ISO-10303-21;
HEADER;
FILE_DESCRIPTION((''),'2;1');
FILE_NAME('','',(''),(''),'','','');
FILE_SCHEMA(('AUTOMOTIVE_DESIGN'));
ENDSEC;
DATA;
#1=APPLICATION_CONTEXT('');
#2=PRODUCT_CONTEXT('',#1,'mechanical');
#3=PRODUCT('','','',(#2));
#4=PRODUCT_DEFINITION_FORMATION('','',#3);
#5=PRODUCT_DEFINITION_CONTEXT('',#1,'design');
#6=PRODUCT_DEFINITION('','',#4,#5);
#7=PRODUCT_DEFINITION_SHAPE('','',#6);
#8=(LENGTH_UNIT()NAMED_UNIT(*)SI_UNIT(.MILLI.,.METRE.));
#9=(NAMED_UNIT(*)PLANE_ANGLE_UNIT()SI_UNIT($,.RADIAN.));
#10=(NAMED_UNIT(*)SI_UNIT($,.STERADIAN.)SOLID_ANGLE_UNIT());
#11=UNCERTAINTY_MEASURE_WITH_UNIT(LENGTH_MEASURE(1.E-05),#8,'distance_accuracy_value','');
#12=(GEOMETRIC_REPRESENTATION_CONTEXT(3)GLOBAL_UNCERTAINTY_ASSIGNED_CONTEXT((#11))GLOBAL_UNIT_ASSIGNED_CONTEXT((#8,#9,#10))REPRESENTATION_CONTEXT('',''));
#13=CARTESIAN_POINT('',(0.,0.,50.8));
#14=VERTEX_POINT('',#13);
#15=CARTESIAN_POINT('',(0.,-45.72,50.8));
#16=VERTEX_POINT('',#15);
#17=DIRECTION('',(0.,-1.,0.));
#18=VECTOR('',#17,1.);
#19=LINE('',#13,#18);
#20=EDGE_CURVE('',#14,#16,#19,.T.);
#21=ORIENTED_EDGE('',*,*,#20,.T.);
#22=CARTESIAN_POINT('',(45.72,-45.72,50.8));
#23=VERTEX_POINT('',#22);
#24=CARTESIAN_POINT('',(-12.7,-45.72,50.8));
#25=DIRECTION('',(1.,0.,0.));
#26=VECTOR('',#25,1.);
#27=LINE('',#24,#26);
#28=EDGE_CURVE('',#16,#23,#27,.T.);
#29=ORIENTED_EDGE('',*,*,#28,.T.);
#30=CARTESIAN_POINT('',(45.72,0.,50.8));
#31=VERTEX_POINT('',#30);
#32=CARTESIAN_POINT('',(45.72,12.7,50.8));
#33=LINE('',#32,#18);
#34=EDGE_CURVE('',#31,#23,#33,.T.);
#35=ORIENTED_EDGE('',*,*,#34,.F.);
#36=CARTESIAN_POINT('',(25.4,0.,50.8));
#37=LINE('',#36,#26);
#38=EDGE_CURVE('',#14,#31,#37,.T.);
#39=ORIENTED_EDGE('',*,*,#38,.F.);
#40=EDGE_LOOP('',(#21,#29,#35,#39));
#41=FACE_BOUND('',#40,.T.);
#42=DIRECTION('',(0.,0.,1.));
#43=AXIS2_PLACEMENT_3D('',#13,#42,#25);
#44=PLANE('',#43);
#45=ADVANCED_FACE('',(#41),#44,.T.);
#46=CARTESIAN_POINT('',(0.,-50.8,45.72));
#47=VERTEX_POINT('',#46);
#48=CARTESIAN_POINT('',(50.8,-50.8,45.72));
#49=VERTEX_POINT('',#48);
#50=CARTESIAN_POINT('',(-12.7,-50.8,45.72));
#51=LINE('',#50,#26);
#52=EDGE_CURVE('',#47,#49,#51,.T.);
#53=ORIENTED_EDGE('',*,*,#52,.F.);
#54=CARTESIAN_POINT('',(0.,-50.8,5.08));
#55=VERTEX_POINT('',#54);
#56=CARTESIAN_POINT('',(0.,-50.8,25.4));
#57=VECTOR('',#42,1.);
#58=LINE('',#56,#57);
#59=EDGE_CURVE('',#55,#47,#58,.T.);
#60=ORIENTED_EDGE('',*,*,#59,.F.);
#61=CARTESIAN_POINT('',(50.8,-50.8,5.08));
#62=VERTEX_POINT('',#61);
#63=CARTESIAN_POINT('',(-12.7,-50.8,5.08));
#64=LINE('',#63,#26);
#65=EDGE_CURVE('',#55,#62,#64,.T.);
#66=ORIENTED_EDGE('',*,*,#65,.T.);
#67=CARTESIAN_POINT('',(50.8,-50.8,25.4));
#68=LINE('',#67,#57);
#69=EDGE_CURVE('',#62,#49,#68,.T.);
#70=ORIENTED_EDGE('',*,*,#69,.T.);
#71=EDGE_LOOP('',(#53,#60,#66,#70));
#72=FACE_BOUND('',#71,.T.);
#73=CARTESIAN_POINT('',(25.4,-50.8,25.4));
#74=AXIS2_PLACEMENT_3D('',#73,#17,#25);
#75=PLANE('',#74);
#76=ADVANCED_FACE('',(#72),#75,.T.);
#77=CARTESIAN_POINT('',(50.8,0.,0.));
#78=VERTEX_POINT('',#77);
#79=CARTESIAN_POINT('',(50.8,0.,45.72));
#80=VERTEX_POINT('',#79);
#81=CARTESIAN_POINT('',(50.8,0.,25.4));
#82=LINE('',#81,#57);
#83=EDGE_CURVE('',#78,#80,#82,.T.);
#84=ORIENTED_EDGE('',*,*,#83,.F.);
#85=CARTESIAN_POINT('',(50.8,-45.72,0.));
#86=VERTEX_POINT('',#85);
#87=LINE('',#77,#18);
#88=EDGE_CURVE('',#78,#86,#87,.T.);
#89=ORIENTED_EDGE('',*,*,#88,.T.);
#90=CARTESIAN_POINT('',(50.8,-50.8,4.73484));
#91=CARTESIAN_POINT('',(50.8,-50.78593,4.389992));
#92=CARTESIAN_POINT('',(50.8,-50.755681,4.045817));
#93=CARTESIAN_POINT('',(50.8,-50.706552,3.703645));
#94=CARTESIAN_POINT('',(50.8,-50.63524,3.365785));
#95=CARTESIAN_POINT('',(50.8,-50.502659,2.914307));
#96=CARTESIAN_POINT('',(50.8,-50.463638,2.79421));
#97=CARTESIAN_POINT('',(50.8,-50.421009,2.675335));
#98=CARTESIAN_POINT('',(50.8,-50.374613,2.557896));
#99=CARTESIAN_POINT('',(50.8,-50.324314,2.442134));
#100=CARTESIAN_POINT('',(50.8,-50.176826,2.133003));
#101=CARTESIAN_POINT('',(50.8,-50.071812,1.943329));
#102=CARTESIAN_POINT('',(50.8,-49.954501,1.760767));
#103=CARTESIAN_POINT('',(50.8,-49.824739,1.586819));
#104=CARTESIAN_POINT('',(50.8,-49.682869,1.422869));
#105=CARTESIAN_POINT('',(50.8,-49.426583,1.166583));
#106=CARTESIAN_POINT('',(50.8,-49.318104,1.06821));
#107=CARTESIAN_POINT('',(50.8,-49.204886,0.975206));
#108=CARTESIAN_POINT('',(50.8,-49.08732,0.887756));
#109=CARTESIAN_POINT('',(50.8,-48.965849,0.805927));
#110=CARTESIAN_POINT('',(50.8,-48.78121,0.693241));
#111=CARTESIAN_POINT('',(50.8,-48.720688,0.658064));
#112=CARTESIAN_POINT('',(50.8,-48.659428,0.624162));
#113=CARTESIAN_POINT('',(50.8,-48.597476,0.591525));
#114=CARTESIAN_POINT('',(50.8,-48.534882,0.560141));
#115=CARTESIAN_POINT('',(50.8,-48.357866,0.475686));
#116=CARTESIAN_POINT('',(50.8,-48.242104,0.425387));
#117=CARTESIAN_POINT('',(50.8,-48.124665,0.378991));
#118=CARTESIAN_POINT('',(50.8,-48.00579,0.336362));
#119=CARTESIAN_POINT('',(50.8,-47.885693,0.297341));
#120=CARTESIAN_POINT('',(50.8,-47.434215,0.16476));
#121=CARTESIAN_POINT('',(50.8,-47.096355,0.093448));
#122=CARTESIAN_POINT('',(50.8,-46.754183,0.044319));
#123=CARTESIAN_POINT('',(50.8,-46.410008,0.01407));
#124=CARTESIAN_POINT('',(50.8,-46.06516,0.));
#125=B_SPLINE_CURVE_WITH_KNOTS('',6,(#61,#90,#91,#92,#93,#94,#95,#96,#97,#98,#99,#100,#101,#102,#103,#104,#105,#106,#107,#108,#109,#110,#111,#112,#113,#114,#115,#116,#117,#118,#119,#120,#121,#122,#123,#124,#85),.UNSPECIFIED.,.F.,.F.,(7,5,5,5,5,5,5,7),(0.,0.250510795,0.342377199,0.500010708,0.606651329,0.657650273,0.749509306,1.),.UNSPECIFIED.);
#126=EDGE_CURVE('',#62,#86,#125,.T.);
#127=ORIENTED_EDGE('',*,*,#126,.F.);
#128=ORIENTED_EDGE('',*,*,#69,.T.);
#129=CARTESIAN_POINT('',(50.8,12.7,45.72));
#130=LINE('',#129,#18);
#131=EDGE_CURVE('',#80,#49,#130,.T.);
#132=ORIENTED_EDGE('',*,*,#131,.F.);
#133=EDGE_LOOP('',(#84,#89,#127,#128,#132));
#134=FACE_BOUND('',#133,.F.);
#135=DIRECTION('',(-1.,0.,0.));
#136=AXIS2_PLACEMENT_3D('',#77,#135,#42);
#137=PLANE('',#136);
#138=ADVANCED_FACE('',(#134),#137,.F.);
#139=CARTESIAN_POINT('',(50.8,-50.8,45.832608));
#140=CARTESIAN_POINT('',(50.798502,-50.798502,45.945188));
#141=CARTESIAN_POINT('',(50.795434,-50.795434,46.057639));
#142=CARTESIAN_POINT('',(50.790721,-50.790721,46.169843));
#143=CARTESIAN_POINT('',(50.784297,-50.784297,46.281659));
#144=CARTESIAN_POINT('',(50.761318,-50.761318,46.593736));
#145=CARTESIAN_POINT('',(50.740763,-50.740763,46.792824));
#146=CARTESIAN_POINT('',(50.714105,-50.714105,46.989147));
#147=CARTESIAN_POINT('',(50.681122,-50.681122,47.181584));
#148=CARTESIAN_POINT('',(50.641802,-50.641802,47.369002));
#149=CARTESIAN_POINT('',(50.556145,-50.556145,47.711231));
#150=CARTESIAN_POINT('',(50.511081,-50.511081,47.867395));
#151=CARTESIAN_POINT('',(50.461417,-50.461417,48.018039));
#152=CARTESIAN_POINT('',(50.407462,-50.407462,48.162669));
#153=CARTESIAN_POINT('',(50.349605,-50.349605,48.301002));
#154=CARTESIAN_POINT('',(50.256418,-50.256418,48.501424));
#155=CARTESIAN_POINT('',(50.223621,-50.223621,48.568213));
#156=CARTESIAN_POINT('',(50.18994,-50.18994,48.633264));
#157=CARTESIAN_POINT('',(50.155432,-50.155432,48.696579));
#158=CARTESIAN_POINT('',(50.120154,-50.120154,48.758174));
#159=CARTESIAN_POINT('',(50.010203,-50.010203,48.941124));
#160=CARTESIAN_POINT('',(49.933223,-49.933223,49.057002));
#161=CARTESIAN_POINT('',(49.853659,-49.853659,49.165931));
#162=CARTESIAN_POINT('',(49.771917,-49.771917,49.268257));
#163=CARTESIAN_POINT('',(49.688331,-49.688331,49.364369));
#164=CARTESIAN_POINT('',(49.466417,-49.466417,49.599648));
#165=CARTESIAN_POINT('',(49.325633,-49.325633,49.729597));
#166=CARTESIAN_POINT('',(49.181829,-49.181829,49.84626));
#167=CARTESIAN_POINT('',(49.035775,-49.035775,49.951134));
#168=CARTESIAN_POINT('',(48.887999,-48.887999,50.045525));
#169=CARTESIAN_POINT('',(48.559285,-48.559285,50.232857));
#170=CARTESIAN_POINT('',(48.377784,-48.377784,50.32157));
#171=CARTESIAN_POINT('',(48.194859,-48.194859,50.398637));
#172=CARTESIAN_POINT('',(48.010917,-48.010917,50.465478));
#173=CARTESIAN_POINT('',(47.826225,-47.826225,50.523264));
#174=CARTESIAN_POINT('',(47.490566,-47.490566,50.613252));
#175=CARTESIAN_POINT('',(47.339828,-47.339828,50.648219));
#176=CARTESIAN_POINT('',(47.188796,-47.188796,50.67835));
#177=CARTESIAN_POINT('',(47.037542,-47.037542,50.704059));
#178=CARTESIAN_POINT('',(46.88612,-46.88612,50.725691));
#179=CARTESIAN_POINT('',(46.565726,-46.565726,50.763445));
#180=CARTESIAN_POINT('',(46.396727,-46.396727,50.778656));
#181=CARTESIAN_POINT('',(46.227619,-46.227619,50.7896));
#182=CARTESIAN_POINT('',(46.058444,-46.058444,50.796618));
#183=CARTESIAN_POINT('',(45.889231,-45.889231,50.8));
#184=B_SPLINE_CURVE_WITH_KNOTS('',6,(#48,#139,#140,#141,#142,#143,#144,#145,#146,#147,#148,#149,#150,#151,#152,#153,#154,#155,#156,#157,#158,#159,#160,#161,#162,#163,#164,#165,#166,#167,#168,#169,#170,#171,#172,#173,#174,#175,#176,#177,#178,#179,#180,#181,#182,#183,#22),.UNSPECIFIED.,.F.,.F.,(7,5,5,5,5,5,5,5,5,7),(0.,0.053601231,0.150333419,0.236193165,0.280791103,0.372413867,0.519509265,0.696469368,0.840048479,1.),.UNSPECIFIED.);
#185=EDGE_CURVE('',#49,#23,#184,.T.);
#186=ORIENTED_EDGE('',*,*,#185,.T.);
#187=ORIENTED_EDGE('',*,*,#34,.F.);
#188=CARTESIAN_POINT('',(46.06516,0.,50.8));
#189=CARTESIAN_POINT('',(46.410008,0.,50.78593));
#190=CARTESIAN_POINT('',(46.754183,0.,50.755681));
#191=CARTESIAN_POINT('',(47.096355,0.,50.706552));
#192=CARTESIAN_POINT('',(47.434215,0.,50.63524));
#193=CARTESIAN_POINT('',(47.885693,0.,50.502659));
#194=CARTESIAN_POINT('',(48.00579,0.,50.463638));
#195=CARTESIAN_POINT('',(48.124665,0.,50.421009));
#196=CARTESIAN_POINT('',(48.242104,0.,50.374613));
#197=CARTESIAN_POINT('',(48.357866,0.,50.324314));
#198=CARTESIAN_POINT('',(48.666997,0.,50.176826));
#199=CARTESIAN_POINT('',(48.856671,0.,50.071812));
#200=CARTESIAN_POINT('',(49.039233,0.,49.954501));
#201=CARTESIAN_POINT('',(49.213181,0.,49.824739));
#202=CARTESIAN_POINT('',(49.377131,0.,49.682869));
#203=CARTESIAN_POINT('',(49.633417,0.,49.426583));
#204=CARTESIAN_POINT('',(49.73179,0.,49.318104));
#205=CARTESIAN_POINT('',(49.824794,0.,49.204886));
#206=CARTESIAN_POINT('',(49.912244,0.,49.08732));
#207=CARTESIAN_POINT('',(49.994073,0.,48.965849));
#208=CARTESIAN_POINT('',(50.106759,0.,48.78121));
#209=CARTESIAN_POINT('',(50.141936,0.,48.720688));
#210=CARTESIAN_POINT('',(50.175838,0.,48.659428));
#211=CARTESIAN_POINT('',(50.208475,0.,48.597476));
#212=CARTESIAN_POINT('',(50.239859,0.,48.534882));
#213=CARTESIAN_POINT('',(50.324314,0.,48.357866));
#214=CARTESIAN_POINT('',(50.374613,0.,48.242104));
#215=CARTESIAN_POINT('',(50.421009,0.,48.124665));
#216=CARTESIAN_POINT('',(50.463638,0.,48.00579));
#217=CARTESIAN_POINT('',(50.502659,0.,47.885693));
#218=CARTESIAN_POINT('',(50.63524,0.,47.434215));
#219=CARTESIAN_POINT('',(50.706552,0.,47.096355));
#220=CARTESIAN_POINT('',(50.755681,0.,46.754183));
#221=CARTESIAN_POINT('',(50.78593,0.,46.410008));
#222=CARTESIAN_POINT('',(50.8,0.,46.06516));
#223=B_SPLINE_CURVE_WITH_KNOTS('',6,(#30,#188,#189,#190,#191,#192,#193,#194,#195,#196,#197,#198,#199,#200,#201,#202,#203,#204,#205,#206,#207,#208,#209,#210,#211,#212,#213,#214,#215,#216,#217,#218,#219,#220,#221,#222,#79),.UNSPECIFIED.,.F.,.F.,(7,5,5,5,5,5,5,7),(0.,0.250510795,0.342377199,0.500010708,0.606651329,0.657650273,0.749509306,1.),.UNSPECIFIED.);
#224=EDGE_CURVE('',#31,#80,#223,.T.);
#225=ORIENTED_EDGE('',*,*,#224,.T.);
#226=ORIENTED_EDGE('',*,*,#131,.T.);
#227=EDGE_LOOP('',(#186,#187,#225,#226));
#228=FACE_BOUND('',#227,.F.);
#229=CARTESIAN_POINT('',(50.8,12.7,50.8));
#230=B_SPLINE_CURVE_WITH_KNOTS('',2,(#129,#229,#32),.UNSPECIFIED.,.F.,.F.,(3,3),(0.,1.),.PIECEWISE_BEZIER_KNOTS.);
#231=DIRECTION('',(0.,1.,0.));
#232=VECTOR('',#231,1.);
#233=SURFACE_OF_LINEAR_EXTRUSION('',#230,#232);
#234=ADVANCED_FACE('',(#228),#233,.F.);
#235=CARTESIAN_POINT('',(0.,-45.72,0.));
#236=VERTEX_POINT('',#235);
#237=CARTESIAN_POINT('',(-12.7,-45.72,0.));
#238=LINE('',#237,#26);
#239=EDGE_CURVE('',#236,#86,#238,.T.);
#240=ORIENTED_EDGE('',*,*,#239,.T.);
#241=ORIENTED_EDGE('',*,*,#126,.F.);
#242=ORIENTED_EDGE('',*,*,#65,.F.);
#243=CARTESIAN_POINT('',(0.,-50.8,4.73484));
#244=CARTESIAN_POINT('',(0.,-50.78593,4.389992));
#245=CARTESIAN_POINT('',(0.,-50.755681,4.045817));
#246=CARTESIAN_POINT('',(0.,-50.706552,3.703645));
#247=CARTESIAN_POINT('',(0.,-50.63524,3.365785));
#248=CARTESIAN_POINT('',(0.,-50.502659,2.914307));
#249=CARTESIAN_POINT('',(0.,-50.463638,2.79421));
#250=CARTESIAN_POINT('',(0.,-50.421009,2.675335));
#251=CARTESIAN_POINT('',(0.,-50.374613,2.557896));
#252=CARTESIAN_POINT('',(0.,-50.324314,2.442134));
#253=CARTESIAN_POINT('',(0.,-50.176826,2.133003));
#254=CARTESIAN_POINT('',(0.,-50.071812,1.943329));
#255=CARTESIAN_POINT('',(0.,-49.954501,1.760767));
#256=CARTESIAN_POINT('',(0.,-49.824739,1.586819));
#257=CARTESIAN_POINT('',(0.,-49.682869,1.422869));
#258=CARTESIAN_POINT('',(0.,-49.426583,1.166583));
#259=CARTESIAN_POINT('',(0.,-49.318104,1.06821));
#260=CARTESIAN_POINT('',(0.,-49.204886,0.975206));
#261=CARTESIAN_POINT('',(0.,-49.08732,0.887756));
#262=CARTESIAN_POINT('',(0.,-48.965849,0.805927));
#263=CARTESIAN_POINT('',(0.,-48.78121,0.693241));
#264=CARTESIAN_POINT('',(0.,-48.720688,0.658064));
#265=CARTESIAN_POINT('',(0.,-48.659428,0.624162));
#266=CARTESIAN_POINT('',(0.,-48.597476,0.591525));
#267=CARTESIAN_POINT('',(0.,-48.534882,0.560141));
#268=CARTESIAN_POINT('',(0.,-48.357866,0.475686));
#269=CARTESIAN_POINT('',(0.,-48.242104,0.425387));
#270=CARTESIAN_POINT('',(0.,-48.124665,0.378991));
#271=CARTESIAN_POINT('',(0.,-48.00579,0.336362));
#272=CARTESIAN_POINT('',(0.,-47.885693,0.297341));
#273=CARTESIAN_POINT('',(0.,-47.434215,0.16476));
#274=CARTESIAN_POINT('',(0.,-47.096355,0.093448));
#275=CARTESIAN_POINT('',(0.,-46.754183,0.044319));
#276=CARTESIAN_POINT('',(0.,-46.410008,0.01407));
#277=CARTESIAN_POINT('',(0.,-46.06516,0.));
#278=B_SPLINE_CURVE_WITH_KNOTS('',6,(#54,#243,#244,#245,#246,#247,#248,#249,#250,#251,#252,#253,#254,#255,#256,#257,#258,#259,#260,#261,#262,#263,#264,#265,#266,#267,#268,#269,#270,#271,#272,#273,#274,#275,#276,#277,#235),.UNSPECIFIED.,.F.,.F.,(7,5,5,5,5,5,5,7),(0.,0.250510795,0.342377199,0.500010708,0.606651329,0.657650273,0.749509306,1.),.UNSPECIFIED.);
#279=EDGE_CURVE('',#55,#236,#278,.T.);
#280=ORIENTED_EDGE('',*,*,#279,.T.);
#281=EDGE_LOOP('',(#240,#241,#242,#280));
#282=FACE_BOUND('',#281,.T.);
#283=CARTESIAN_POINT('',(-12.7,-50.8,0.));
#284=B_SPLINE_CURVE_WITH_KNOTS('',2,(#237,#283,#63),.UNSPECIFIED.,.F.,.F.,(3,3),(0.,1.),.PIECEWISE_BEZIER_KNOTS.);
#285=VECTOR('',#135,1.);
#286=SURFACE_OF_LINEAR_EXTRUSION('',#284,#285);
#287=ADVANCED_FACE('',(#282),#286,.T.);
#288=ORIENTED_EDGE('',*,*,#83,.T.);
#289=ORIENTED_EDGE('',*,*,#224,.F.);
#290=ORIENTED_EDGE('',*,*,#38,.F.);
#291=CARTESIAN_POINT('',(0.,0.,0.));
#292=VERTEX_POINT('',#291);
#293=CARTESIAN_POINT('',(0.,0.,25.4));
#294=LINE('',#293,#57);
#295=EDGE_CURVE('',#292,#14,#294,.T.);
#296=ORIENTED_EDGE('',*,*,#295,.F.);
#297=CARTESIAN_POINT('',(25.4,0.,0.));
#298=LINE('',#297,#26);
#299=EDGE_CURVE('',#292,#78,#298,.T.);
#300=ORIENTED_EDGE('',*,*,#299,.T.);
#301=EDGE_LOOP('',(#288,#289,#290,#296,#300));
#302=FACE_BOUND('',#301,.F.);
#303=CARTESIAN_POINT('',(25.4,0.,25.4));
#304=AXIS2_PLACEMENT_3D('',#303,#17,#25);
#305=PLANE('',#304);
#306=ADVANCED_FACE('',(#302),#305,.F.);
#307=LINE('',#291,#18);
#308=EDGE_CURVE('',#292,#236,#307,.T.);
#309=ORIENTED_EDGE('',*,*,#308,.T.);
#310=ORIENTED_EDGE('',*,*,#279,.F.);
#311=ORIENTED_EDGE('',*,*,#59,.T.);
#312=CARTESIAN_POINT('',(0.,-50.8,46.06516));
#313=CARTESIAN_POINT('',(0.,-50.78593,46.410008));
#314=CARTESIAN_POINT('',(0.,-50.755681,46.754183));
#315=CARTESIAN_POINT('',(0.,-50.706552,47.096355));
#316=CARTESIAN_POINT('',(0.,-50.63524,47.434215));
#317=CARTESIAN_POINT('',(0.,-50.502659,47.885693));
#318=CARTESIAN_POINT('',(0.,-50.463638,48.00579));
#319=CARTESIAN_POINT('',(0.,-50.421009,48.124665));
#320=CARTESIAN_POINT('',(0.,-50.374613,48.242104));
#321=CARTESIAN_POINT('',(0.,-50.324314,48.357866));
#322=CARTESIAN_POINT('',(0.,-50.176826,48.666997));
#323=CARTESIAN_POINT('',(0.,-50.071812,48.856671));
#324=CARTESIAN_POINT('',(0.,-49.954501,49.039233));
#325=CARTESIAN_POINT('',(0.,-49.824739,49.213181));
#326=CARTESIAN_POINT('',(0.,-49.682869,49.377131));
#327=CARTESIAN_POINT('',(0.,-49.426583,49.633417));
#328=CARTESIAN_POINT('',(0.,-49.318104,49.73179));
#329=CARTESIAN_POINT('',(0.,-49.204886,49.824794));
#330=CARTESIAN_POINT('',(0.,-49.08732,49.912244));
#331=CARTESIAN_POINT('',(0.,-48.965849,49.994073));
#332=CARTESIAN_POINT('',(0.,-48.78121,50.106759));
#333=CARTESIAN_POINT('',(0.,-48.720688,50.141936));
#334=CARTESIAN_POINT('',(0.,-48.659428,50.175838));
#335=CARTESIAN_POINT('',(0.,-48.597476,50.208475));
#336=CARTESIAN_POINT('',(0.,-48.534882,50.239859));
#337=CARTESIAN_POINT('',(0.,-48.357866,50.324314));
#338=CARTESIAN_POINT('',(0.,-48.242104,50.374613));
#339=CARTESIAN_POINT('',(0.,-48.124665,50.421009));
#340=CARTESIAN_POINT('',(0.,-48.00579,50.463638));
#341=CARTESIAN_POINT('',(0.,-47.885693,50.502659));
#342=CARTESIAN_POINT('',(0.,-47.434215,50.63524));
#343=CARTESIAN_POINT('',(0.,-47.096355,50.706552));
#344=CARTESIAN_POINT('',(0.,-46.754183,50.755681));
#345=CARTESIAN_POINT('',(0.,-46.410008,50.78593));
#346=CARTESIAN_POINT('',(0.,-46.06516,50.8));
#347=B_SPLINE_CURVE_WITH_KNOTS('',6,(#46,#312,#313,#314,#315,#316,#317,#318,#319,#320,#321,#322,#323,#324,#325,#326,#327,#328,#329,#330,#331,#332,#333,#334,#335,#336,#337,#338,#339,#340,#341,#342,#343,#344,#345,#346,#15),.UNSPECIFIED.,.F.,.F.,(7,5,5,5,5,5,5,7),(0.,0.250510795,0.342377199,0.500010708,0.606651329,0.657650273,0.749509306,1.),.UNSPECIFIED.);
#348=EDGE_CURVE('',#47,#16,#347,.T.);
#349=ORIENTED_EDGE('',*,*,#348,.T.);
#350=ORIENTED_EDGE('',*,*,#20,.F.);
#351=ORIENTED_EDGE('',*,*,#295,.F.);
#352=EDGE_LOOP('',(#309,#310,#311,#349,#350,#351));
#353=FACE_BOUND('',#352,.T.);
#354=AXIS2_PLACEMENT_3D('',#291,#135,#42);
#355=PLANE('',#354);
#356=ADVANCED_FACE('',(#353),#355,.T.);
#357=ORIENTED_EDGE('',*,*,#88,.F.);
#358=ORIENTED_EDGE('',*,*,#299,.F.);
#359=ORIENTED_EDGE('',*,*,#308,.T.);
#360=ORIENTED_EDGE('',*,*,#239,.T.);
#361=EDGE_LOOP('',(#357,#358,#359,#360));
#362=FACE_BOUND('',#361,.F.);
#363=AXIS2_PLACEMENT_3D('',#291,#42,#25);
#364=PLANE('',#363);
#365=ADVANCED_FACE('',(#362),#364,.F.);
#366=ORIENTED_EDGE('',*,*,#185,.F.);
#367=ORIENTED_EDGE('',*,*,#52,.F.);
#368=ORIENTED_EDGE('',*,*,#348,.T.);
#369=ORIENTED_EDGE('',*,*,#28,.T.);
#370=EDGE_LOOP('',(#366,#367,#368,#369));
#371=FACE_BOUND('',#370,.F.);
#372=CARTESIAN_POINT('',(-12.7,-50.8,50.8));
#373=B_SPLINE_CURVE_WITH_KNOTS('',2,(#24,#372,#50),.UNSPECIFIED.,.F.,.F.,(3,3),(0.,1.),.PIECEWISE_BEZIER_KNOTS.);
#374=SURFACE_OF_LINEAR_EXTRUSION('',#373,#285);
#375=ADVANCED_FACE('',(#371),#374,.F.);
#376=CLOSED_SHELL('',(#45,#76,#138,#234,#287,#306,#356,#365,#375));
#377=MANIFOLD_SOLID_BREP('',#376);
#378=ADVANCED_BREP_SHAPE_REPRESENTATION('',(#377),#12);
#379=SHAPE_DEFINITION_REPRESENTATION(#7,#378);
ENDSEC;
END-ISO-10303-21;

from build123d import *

# Parameters (mm, degrees)
F0_W        = 50.8
F0_H        = 50.8
F1_DEPTH    = 50.8
F2_T1_DEPTH = 76.2
F2_T3_DEPTH = 76.2
F3_T1_DEPTH = 76.2


# Not quite as in the source:
# - a fillet or chamfer that OpenCascade refuses, or shapes differently, is made with other operations: its cross-section is extruded or revolved along the edge and cut away or added


with BuildPart() as f1:
    # F0 (on Front) → F1 (new body)
    with BuildSketch(Plane.XZ):
        with Locations((25.4, 25.4)):
            Rectangle(F0_W, F0_H)
    extrude(amount=F1_DEPTH)

    # F2: fillet of radius 5.08 on 2 edges, made by hand

    # F2_s2 → F2_t1 (cut)
    with BuildSketch(Plane.XZ.offset(-12.7)):
        with BuildLine():
            add(Edge.make_bspline(
                [(50.8, 45.72), (50.8, 50.8), (45.72, 50.8)],
                knots=[0, 0, 0, 1, 1, 1], degree=2, weights=[1, 1, 1]))
            Line((45.72, 50.8), (50.8, 50.8))
            Line((50.8, 50.8), (50.8, 45.72))
        make_face()
    extrude(amount=F2_T1_DEPTH, mode=Mode.SUBTRACT)

    # F2_s4 → F2_t3 (cut)
    with BuildSketch(Plane.YZ.offset(-12.7)):
        with BuildLine():
            add(Edge.make_bspline(
                [(-45.72, 50.8), (-50.8, 50.8), (-50.8, 45.72)],
                knots=[0, 0, 0, 1, 1, 1], degree=2, weights=[1, 1, 1]))
            Line((-50.8, 45.72), (-50.8, 50.8))
            Line((-50.8, 50.8), (-45.72, 50.8))
        make_face()
    extrude(amount=F2_T3_DEPTH, mode=Mode.SUBTRACT)

    # F3: fillet of radius 5.08 on 1 edges, made by hand

    # F3_s2 → F3_t1 (cut)
    with BuildSketch(Plane.YZ.offset(-12.7)):
        with BuildLine():
            add(Edge.make_bspline(
                [(-45.72, 0), (-50.8, 0), (-50.8, 5.08)],
                knots=[0, 0, 0, 1, 1, 1], degree=2, weights=[1, 1, 1]))
            Line((-50.8, 5.08), (-50.8, 0))
            Line((-50.8, 0), (-45.72, 0))
        make_face()
    extrude(amount=F3_T1_DEPTH, mode=Mode.SUBTRACT)


solid = f1.part
